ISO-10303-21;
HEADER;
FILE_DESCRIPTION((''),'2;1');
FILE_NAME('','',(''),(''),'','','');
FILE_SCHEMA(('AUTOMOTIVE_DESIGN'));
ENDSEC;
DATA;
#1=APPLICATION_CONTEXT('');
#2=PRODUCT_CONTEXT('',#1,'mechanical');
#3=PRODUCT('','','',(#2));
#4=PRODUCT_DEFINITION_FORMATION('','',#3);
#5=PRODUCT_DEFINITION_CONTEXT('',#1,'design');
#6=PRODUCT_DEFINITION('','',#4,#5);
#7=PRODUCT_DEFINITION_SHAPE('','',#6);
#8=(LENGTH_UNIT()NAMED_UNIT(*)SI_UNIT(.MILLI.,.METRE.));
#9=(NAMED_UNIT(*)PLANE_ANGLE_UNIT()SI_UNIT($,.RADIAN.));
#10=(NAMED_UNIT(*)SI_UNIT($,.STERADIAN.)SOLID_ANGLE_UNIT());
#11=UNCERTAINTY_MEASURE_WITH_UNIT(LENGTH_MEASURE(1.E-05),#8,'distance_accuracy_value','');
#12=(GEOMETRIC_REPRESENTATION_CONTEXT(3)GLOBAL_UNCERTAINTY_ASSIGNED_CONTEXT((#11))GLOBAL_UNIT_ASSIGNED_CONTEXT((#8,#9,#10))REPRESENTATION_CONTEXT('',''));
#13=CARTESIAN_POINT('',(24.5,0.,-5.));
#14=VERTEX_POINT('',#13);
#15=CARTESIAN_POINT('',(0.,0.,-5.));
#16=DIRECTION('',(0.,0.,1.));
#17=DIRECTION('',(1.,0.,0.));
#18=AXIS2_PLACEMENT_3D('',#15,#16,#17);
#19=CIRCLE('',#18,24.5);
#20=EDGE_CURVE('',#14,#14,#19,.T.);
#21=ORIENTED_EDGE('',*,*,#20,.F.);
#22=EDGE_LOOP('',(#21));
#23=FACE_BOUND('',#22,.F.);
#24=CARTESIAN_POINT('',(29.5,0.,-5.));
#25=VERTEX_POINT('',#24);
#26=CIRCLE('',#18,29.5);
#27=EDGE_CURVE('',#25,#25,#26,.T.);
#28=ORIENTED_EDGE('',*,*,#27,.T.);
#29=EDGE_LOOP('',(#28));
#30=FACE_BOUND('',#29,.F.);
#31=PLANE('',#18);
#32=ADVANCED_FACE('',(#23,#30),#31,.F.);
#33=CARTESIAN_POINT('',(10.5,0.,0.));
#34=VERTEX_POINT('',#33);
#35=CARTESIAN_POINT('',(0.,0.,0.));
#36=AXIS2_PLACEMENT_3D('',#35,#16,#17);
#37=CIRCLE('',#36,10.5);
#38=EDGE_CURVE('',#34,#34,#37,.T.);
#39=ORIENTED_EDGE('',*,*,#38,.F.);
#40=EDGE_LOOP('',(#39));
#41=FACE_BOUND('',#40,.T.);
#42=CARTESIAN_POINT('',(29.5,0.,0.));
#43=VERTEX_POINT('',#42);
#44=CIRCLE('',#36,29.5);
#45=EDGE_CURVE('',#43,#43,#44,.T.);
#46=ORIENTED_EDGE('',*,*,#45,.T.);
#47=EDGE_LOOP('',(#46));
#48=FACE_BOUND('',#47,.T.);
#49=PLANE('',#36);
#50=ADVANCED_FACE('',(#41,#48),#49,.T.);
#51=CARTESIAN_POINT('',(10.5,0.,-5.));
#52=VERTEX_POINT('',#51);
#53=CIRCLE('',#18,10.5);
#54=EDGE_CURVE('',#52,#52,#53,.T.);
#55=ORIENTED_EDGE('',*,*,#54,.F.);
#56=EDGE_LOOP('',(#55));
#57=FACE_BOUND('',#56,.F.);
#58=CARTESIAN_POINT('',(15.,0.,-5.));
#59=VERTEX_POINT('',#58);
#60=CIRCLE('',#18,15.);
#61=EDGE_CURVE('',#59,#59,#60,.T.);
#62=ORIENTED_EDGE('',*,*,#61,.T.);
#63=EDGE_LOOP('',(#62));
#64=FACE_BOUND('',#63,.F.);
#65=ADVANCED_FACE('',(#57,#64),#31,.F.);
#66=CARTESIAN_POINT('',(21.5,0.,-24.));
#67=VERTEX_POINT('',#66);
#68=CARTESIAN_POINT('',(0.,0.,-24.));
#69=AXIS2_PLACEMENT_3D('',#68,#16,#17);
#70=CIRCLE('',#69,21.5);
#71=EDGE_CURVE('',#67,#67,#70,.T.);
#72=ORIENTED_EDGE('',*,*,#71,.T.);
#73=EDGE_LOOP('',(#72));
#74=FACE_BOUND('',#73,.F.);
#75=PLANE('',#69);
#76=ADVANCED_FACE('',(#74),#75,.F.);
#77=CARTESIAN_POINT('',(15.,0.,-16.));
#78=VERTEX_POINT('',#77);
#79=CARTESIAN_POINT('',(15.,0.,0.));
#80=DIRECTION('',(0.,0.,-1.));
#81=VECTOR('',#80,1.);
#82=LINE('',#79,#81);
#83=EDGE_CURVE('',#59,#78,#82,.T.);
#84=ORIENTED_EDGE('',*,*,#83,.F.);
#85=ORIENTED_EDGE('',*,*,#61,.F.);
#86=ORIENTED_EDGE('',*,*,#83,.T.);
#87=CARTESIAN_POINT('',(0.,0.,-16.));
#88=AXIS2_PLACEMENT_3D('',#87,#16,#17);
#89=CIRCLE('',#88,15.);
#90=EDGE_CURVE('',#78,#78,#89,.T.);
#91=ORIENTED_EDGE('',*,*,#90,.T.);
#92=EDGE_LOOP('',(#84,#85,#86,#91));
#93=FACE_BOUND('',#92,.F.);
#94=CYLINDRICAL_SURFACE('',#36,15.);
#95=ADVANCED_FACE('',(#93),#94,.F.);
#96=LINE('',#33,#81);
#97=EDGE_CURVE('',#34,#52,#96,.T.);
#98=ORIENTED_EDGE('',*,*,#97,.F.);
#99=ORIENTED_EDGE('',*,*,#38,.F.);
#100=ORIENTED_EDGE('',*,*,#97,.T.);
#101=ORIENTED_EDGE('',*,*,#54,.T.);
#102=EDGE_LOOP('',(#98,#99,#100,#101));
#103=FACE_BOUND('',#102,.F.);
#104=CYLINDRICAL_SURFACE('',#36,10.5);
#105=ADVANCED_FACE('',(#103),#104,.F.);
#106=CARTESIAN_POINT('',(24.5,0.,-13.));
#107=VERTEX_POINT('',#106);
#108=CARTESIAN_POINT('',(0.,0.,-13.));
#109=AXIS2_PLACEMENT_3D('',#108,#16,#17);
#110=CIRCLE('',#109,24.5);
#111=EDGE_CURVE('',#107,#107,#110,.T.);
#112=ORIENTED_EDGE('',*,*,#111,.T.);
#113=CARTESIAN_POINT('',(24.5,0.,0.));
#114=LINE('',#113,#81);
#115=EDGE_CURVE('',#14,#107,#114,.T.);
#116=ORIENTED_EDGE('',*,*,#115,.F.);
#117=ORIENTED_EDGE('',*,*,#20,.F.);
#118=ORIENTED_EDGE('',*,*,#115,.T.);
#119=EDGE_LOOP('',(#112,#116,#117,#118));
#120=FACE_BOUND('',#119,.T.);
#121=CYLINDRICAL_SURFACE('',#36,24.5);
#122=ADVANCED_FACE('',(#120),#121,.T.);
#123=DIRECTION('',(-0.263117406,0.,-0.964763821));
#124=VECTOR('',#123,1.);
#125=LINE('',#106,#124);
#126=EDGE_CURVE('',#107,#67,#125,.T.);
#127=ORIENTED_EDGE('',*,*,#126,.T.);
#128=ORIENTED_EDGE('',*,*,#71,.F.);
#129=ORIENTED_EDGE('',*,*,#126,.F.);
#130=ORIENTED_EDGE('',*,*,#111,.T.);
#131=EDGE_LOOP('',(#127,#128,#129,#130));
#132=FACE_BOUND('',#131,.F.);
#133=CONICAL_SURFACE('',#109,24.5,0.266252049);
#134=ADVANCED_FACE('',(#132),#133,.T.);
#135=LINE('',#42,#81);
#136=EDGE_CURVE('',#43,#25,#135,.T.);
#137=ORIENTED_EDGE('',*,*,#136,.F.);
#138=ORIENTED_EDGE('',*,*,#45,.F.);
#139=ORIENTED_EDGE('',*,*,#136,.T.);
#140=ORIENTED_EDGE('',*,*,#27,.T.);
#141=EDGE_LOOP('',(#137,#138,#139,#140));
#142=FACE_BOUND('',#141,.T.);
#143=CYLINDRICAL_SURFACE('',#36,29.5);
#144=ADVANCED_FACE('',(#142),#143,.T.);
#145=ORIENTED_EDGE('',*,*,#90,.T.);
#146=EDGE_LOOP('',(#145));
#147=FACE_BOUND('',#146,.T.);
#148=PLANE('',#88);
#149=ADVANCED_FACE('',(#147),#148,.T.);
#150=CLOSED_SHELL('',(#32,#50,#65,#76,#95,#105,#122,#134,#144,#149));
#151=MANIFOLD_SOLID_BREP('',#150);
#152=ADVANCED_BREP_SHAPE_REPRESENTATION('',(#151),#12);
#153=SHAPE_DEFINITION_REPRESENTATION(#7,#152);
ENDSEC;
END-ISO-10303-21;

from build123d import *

# Parameters (mm, degrees)
F0_R     = 24.5
F0_R_2   = 15
F0_R_3   = 10.5
F1_DEPTH = 24
F2_SIZE2 = 3
F2_SIZE  = 11
F0_R_4   = 29.5
F3_DEPTH = 16
F4_DEPTH = 5
F5_DEPTH = 5


# Not quite as in the source:
# - a feature names something its author has since deleted; it is built from what else it names


with BuildPart() as f1:
    # F0 (on Top) → F1 (new body)
    with BuildSketch(Plane.XY):
        Circle(F0_R)
        Circle(F0_R_2, mode=Mode.SUBTRACT)
        Circle(F0_R_2)
        Circle(F0_R_3, mode=Mode.SUBTRACT)
        Circle(F0_R_3)
    extrude(amount=-F1_DEPTH)

    # F2
    f2_edges = [f1.edges().sort_by_distance(p)[0] for p in [
        (-24.5, 0, -24),
    ]]
    f2_side = f1.faces().sort_by_distance((-24.5, 0, -12))[0]
    chamfer(f2_edges, length=F2_SIZE, length2=F2_SIZE2, reference=f2_side)

    # F0 (on Top) → F3 (cut)
    with BuildSketch(Plane.XY):
        Circle(F0_R_4)
        Circle(F0_R, mode=Mode.SUBTRACT)
        Circle(F0_R_2)
        Circle(F0_R_3, mode=Mode.SUBTRACT)
        Circle(F0_R_3)
    extrude(amount=-F3_DEPTH, mode=Mode.SUBTRACT)

    # F0 (on Top) → F4 (join)
    with BuildSketch(Plane.XY):
        Circle(F0_R_2)
        Circle(F0_R_3, mode=Mode.SUBTRACT)
    extrude(amount=-F4_DEPTH)

    # F0 (on Top) → F5 (join)
    with BuildSketch(Plane.XY):
        Circle(F0_R_4)
        Circle(F0_R, mode=Mode.SUBTRACT)
    extrude(amount=-F5_DEPTH)


solid = f1.part
